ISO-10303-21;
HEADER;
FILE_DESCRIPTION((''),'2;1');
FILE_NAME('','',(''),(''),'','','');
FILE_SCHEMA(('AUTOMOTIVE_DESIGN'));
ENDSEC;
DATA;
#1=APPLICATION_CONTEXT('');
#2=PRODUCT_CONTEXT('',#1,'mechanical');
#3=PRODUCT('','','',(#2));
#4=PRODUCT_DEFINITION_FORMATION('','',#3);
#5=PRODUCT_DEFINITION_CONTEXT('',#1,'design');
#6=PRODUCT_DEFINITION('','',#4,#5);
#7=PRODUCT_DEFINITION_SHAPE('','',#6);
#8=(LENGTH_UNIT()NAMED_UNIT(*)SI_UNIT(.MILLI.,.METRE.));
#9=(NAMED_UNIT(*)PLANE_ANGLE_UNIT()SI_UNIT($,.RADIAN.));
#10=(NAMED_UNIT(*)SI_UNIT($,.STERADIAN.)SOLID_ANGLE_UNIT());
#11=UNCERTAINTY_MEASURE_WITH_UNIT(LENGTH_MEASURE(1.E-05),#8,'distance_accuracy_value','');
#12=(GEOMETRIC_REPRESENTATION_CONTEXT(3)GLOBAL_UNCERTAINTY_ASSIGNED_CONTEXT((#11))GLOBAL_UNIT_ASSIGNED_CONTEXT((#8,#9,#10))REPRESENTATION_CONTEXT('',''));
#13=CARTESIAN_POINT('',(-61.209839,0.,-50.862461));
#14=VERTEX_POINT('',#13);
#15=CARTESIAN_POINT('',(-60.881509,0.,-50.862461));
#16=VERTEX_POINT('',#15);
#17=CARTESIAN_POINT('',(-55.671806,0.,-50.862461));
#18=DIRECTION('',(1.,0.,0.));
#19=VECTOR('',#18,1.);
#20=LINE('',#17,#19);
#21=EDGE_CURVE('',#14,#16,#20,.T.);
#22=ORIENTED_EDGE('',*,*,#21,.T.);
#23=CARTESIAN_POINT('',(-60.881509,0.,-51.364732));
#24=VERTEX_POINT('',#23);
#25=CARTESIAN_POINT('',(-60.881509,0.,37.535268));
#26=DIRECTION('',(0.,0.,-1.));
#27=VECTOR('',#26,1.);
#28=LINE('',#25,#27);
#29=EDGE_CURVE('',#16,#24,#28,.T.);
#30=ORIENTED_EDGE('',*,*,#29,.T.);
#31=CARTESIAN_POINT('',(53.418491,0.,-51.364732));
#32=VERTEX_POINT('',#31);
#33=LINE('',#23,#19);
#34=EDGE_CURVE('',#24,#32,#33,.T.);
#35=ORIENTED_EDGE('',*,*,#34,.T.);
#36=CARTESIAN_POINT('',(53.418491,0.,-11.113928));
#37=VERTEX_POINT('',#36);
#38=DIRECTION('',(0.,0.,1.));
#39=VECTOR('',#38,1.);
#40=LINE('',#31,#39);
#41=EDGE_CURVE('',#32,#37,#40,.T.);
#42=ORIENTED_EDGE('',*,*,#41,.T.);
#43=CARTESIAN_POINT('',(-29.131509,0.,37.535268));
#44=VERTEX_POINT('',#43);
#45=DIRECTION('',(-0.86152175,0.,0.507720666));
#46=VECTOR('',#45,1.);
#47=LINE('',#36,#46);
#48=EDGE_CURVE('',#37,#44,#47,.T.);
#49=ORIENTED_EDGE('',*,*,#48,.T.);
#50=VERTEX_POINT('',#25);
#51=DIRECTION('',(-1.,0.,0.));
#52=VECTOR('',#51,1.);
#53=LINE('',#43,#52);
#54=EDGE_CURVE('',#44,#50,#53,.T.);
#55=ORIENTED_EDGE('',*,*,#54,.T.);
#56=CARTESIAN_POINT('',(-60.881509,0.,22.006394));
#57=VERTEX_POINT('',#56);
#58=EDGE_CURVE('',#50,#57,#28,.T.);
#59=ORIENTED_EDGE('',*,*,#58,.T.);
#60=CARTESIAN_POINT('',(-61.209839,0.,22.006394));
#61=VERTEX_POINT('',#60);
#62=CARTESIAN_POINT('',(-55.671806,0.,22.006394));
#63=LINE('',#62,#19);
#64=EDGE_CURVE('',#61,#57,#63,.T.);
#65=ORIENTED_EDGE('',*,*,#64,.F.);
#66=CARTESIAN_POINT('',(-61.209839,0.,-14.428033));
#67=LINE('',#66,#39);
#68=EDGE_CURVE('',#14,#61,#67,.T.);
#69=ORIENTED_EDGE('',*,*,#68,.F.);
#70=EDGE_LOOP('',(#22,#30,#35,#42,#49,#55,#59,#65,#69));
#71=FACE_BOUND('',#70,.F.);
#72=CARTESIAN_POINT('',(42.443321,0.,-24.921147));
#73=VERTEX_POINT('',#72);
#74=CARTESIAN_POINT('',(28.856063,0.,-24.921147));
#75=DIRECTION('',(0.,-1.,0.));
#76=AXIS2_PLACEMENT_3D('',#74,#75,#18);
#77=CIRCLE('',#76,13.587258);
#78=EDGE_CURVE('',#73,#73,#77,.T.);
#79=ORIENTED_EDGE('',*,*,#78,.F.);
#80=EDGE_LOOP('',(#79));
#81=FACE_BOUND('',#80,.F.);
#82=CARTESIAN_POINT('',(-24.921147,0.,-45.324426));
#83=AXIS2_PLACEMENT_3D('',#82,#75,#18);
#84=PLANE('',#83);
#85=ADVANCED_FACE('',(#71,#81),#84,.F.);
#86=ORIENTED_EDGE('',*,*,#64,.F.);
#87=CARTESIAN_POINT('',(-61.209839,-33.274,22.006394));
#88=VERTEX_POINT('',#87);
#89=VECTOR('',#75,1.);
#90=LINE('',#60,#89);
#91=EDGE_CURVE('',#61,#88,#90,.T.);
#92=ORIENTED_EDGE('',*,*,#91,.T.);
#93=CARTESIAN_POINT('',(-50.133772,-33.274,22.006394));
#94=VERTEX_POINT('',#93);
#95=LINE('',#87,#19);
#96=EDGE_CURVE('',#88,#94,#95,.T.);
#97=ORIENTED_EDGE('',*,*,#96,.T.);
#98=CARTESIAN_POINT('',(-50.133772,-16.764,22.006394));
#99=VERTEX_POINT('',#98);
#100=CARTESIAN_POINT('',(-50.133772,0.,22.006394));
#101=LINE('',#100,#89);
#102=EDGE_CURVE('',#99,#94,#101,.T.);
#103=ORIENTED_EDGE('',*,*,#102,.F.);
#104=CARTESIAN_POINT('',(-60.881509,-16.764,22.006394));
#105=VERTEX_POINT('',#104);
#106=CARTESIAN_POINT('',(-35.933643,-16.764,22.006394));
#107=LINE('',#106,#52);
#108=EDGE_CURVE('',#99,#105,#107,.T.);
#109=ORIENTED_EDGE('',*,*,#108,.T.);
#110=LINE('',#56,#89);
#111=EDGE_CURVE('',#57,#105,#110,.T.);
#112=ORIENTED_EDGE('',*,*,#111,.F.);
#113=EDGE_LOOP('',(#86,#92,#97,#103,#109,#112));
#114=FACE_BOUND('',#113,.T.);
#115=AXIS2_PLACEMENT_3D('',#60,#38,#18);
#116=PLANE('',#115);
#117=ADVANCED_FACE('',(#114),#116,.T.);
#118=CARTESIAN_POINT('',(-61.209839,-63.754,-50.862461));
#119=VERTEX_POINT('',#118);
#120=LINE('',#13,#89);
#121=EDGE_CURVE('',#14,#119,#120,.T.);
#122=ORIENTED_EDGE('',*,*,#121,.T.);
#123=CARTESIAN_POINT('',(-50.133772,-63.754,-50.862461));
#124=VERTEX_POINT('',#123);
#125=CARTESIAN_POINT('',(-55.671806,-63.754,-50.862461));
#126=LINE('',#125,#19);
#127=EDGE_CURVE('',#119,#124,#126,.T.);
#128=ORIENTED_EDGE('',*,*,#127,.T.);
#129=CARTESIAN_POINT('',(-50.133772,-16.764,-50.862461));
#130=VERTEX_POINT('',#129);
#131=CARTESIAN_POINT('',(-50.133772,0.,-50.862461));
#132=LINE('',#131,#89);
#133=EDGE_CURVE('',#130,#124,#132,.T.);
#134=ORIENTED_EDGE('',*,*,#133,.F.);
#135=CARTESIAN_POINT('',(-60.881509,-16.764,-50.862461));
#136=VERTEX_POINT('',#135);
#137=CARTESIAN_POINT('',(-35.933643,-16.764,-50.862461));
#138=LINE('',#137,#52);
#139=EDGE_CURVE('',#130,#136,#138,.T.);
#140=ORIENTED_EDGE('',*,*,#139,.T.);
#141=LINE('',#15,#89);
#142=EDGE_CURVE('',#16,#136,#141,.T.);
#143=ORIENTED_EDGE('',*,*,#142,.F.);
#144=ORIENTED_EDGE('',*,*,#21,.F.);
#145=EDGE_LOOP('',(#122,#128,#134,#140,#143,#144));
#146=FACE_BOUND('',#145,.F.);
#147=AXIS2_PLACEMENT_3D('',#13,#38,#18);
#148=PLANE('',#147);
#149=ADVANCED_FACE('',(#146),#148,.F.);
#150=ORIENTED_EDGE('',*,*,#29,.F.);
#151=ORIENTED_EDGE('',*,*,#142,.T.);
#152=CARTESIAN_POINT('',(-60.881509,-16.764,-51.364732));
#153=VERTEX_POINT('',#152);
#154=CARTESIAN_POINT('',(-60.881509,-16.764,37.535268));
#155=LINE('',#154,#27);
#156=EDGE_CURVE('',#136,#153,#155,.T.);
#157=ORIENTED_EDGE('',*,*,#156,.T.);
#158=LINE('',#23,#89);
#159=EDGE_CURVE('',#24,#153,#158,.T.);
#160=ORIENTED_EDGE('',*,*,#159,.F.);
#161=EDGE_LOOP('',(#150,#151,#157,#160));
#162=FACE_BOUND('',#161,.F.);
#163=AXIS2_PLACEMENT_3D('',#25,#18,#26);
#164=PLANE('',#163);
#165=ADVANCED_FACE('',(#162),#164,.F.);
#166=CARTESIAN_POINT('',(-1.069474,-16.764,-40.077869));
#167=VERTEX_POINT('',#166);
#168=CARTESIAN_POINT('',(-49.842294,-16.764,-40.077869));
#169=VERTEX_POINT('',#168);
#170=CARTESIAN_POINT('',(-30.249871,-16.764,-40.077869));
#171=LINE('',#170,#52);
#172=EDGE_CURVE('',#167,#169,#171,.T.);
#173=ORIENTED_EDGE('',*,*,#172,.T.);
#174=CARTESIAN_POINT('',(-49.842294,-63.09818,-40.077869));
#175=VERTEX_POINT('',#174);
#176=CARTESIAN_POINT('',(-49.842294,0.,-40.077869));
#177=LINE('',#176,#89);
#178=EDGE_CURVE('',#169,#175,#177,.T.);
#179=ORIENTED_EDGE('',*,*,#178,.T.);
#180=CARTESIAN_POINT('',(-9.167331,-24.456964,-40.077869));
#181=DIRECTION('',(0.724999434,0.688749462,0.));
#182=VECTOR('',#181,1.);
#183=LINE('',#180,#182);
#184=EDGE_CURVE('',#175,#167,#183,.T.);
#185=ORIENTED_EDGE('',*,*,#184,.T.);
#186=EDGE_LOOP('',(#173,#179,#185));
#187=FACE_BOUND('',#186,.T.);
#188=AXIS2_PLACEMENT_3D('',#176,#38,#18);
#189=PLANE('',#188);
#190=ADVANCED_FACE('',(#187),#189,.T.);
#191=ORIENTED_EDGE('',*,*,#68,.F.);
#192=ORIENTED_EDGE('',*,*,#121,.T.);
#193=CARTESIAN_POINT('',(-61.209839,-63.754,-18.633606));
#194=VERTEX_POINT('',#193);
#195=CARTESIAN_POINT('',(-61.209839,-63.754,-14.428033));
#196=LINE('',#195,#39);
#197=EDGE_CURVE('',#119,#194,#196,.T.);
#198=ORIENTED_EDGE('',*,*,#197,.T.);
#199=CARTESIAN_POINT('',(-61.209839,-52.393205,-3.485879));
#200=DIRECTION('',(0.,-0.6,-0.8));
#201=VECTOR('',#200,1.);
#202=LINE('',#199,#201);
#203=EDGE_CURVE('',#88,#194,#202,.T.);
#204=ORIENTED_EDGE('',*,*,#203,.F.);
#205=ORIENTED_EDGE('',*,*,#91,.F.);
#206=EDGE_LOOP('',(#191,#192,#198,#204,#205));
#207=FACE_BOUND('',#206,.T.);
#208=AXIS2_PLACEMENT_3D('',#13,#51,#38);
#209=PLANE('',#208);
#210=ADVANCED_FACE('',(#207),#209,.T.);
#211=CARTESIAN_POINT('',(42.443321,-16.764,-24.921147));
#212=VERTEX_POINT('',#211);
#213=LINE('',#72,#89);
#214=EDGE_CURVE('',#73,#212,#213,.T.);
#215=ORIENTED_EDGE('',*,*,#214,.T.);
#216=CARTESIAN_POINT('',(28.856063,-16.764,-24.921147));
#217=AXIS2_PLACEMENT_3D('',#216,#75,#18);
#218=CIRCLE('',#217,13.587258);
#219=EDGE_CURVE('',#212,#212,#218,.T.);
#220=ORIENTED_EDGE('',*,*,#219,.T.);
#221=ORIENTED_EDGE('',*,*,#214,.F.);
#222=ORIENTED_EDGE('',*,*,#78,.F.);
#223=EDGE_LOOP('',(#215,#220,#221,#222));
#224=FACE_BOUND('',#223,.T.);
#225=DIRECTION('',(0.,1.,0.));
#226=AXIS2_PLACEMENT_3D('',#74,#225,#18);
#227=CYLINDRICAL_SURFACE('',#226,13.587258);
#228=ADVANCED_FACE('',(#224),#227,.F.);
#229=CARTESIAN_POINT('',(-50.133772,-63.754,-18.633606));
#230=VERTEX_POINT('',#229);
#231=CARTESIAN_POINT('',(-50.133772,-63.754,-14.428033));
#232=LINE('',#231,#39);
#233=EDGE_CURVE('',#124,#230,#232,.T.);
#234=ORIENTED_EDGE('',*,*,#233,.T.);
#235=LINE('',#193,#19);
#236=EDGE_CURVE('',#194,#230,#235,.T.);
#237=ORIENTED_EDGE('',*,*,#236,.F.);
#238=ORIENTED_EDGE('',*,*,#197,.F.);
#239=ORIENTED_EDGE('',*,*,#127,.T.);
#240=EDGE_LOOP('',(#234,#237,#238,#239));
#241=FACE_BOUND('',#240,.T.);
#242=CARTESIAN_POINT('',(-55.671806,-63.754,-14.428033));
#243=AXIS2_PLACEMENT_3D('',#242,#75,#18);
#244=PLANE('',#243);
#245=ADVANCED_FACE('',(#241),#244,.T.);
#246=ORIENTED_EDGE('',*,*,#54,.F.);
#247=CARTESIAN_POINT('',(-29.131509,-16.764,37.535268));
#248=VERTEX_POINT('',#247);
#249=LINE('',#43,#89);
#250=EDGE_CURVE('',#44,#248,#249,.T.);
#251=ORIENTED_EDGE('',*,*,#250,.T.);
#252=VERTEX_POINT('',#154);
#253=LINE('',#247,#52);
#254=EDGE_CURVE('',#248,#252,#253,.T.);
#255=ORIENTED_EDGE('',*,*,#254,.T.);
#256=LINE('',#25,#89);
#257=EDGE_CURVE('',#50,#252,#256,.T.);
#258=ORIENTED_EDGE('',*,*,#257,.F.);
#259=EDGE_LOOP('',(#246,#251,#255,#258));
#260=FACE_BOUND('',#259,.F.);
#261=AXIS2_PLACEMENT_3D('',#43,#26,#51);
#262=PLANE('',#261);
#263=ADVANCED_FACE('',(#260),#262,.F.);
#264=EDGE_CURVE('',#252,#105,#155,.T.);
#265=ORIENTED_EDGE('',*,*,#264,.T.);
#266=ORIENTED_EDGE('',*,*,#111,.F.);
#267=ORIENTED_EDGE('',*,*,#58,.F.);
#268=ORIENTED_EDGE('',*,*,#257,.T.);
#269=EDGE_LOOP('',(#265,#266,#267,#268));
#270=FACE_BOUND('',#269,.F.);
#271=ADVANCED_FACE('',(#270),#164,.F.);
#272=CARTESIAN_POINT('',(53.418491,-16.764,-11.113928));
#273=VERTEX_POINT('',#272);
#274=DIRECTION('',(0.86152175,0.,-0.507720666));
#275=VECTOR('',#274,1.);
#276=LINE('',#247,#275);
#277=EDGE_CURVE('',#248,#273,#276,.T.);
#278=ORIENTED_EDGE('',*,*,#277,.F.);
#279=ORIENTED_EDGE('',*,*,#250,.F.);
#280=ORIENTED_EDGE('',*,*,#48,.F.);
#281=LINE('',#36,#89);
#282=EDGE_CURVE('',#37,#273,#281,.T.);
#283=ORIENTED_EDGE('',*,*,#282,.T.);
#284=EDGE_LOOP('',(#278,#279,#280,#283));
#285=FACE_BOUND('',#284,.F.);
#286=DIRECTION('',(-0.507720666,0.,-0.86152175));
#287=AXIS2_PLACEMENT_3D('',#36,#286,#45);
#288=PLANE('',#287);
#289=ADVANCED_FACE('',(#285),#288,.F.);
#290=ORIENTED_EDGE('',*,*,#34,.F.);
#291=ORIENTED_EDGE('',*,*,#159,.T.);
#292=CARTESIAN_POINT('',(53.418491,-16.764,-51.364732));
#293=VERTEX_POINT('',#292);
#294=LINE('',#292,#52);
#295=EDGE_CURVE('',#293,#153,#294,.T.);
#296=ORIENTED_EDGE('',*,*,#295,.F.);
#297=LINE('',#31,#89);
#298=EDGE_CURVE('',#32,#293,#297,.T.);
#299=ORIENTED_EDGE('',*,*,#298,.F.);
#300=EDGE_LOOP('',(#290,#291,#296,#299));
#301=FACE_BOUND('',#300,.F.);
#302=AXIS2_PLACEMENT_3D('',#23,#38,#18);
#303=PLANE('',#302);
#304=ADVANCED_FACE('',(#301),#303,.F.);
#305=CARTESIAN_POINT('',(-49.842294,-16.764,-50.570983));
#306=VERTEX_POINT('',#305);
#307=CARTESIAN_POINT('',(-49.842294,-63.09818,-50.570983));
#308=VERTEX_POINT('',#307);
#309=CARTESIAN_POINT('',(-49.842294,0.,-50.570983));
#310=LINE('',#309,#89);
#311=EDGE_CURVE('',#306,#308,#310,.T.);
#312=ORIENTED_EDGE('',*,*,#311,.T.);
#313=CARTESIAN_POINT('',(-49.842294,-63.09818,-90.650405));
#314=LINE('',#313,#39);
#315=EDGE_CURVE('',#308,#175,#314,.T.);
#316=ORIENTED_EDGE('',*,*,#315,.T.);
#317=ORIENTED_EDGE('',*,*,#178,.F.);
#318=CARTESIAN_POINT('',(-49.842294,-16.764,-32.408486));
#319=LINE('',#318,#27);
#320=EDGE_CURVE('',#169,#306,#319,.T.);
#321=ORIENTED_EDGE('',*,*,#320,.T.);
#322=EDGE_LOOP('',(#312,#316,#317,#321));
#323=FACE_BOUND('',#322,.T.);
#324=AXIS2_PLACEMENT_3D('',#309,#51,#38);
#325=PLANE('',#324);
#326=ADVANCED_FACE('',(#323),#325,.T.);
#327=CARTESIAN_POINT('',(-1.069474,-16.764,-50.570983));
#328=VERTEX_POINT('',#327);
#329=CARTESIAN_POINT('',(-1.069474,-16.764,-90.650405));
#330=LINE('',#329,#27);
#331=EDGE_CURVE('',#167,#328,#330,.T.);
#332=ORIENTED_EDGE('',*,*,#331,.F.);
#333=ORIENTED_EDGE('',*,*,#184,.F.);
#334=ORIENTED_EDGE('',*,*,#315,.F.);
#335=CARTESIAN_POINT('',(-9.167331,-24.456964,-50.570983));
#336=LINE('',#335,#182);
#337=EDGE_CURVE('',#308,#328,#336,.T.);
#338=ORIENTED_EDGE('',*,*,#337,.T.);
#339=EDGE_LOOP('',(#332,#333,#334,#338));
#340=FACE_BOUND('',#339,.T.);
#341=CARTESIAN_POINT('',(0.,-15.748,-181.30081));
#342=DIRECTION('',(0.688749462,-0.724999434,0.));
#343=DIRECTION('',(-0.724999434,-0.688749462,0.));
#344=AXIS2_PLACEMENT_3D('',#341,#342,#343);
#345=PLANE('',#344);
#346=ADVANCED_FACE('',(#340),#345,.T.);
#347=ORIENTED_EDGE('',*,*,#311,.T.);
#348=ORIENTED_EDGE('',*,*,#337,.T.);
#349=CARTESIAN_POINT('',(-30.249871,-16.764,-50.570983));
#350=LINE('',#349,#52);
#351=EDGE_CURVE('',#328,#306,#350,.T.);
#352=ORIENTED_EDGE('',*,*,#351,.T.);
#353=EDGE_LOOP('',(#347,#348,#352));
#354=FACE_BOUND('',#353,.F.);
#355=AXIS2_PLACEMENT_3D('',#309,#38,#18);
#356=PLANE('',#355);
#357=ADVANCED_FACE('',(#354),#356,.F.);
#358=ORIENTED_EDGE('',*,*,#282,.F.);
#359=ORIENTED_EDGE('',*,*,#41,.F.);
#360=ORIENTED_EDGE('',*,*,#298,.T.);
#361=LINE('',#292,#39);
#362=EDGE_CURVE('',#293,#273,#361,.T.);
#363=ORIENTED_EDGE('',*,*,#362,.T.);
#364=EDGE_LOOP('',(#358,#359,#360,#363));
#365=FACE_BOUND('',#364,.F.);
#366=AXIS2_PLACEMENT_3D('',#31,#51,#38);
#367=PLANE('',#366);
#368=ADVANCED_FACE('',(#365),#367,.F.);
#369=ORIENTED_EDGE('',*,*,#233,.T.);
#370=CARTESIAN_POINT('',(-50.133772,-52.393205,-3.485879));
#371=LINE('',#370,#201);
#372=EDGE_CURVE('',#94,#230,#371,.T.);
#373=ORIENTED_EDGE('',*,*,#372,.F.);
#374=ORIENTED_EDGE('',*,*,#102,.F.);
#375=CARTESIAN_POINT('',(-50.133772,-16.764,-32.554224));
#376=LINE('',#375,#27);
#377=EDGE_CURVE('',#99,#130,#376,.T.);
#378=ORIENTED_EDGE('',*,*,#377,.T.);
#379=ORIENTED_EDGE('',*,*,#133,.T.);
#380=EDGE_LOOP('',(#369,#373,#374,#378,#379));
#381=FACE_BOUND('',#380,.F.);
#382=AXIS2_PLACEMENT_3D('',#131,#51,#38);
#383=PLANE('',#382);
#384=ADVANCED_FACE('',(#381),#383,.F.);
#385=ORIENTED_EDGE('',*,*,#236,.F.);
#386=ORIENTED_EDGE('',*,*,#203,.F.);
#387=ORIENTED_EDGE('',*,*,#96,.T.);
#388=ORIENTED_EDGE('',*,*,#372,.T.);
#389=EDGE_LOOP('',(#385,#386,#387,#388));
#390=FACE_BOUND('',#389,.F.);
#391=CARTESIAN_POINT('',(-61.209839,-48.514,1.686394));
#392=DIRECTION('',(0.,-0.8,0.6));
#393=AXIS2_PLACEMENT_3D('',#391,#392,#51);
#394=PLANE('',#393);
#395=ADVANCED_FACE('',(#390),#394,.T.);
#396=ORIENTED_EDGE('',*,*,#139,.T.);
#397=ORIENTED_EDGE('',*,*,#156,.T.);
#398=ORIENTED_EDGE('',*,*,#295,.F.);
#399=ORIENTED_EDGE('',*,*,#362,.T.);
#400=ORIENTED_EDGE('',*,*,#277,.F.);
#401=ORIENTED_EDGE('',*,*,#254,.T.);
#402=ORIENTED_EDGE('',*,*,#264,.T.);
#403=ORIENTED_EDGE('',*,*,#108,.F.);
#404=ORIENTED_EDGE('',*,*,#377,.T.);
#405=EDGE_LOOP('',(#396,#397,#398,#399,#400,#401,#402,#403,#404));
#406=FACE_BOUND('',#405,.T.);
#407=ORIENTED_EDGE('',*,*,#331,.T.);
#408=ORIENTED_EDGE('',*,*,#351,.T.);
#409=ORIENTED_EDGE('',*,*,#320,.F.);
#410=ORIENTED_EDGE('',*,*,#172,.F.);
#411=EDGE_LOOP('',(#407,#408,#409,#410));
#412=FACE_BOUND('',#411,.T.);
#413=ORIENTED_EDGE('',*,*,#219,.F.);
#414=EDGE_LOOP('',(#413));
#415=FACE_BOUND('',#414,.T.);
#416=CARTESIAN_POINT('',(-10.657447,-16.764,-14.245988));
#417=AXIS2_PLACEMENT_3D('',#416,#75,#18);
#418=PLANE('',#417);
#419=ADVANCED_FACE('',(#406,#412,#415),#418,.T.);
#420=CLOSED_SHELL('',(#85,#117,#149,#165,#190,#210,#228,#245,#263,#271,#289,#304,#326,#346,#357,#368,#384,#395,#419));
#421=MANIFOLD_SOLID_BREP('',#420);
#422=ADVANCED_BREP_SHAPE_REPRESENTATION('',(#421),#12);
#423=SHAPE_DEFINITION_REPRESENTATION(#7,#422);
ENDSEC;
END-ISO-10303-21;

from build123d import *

# Parameters (mm, degrees)
F0_R        = 13.5872580749
F1_DEPTH    = 16.764
F2_W        = 11.076066643
F2_H        = 72.8688556701
F3_DEPTH    = 63.754
F4_SIZE2    = 40.64
F4_SIZE     = 30.48
F5_W        = 49.8422943056
F5_H        = 10.4931145906
F6_DEPTH    = 64.008
F7_T4_DEPTH = 271.9527686037


# Not quite as in the source:
# - a fillet or chamfer that OpenCascade refuses, or shapes differently, is made with other operations: its cross-section is extruded or revolved along the edge and cut away or added


with BuildPart() as f1:
    # F0 (on Front) → F1 (new body)
    with BuildSketch(Plane.XZ):
        Polygon((-29.1315091585, 37.5352683077), (-60.8815091585, 37.5352683077), (-60.8815091585, -51.3647316923), (53.4184908415, -51.3647316923), (53.4184908415, -11.1139282757), align=None)
        with Locations((28.8560632616, -24.9211471528)):
            Circle(F0_R, mode=Mode.SUBTRACT)
    extrude(amount=F1_DEPTH)

    # F2 (on Front) → F3 (join)
    with BuildSketch(Plane.XZ):
        with Locations((-55.6718055159, -14.4280334935)):
            Rectangle(F2_W, F2_H)
    extrude(amount=F3_DEPTH)

    # F4
    f4_edges = [f1.edges().sort_by_distance(p)[0] for p in [
        (-55.671806, -63.754, 22.006394),
    ]]
    f4_side = f1.faces().sort_by_distance((-55.728042, -39.925416, 22.006394))[0]
    chamfer(f4_edges, length=F4_SIZE, length2=F4_SIZE2, reference=f4_side)

    # F5 (on Front) → F6 (join)
    with BuildSketch(Plane.XZ):
        with Locations((-24.9211471528, -45.3244261444)):
            Rectangle(F5_W, F5_H)
    extrude(amount=F6_DEPTH)

    # F7: chamfer of 48.26 x 50.8 on 1 edges, made by hand


with BuildPart() as f7_tool2:
    # F7_s3 → F7_t4 (new body)
    with BuildSketch(Plane.XY.offset(-181.3008104462)):
        Polygon((0, -15.748), (-50.8, -64.008), (0, -64.008), align=None)
    extrude(amount=F7_T4_DEPTH)

    split(bisect_by=Plane.XZ.offset(16.764), keep=Keep.TOP)

    split(bisect_by=Plane.YZ.offset(-49.8422943056), keep=Keep.TOP)


with BuildPart() as f1_1:
    add(f1.part)

    # F7_t1: cut F7_tool2
    add(f7_tool2.part, mode=Mode.SUBTRACT)


solid = f1_1.part
